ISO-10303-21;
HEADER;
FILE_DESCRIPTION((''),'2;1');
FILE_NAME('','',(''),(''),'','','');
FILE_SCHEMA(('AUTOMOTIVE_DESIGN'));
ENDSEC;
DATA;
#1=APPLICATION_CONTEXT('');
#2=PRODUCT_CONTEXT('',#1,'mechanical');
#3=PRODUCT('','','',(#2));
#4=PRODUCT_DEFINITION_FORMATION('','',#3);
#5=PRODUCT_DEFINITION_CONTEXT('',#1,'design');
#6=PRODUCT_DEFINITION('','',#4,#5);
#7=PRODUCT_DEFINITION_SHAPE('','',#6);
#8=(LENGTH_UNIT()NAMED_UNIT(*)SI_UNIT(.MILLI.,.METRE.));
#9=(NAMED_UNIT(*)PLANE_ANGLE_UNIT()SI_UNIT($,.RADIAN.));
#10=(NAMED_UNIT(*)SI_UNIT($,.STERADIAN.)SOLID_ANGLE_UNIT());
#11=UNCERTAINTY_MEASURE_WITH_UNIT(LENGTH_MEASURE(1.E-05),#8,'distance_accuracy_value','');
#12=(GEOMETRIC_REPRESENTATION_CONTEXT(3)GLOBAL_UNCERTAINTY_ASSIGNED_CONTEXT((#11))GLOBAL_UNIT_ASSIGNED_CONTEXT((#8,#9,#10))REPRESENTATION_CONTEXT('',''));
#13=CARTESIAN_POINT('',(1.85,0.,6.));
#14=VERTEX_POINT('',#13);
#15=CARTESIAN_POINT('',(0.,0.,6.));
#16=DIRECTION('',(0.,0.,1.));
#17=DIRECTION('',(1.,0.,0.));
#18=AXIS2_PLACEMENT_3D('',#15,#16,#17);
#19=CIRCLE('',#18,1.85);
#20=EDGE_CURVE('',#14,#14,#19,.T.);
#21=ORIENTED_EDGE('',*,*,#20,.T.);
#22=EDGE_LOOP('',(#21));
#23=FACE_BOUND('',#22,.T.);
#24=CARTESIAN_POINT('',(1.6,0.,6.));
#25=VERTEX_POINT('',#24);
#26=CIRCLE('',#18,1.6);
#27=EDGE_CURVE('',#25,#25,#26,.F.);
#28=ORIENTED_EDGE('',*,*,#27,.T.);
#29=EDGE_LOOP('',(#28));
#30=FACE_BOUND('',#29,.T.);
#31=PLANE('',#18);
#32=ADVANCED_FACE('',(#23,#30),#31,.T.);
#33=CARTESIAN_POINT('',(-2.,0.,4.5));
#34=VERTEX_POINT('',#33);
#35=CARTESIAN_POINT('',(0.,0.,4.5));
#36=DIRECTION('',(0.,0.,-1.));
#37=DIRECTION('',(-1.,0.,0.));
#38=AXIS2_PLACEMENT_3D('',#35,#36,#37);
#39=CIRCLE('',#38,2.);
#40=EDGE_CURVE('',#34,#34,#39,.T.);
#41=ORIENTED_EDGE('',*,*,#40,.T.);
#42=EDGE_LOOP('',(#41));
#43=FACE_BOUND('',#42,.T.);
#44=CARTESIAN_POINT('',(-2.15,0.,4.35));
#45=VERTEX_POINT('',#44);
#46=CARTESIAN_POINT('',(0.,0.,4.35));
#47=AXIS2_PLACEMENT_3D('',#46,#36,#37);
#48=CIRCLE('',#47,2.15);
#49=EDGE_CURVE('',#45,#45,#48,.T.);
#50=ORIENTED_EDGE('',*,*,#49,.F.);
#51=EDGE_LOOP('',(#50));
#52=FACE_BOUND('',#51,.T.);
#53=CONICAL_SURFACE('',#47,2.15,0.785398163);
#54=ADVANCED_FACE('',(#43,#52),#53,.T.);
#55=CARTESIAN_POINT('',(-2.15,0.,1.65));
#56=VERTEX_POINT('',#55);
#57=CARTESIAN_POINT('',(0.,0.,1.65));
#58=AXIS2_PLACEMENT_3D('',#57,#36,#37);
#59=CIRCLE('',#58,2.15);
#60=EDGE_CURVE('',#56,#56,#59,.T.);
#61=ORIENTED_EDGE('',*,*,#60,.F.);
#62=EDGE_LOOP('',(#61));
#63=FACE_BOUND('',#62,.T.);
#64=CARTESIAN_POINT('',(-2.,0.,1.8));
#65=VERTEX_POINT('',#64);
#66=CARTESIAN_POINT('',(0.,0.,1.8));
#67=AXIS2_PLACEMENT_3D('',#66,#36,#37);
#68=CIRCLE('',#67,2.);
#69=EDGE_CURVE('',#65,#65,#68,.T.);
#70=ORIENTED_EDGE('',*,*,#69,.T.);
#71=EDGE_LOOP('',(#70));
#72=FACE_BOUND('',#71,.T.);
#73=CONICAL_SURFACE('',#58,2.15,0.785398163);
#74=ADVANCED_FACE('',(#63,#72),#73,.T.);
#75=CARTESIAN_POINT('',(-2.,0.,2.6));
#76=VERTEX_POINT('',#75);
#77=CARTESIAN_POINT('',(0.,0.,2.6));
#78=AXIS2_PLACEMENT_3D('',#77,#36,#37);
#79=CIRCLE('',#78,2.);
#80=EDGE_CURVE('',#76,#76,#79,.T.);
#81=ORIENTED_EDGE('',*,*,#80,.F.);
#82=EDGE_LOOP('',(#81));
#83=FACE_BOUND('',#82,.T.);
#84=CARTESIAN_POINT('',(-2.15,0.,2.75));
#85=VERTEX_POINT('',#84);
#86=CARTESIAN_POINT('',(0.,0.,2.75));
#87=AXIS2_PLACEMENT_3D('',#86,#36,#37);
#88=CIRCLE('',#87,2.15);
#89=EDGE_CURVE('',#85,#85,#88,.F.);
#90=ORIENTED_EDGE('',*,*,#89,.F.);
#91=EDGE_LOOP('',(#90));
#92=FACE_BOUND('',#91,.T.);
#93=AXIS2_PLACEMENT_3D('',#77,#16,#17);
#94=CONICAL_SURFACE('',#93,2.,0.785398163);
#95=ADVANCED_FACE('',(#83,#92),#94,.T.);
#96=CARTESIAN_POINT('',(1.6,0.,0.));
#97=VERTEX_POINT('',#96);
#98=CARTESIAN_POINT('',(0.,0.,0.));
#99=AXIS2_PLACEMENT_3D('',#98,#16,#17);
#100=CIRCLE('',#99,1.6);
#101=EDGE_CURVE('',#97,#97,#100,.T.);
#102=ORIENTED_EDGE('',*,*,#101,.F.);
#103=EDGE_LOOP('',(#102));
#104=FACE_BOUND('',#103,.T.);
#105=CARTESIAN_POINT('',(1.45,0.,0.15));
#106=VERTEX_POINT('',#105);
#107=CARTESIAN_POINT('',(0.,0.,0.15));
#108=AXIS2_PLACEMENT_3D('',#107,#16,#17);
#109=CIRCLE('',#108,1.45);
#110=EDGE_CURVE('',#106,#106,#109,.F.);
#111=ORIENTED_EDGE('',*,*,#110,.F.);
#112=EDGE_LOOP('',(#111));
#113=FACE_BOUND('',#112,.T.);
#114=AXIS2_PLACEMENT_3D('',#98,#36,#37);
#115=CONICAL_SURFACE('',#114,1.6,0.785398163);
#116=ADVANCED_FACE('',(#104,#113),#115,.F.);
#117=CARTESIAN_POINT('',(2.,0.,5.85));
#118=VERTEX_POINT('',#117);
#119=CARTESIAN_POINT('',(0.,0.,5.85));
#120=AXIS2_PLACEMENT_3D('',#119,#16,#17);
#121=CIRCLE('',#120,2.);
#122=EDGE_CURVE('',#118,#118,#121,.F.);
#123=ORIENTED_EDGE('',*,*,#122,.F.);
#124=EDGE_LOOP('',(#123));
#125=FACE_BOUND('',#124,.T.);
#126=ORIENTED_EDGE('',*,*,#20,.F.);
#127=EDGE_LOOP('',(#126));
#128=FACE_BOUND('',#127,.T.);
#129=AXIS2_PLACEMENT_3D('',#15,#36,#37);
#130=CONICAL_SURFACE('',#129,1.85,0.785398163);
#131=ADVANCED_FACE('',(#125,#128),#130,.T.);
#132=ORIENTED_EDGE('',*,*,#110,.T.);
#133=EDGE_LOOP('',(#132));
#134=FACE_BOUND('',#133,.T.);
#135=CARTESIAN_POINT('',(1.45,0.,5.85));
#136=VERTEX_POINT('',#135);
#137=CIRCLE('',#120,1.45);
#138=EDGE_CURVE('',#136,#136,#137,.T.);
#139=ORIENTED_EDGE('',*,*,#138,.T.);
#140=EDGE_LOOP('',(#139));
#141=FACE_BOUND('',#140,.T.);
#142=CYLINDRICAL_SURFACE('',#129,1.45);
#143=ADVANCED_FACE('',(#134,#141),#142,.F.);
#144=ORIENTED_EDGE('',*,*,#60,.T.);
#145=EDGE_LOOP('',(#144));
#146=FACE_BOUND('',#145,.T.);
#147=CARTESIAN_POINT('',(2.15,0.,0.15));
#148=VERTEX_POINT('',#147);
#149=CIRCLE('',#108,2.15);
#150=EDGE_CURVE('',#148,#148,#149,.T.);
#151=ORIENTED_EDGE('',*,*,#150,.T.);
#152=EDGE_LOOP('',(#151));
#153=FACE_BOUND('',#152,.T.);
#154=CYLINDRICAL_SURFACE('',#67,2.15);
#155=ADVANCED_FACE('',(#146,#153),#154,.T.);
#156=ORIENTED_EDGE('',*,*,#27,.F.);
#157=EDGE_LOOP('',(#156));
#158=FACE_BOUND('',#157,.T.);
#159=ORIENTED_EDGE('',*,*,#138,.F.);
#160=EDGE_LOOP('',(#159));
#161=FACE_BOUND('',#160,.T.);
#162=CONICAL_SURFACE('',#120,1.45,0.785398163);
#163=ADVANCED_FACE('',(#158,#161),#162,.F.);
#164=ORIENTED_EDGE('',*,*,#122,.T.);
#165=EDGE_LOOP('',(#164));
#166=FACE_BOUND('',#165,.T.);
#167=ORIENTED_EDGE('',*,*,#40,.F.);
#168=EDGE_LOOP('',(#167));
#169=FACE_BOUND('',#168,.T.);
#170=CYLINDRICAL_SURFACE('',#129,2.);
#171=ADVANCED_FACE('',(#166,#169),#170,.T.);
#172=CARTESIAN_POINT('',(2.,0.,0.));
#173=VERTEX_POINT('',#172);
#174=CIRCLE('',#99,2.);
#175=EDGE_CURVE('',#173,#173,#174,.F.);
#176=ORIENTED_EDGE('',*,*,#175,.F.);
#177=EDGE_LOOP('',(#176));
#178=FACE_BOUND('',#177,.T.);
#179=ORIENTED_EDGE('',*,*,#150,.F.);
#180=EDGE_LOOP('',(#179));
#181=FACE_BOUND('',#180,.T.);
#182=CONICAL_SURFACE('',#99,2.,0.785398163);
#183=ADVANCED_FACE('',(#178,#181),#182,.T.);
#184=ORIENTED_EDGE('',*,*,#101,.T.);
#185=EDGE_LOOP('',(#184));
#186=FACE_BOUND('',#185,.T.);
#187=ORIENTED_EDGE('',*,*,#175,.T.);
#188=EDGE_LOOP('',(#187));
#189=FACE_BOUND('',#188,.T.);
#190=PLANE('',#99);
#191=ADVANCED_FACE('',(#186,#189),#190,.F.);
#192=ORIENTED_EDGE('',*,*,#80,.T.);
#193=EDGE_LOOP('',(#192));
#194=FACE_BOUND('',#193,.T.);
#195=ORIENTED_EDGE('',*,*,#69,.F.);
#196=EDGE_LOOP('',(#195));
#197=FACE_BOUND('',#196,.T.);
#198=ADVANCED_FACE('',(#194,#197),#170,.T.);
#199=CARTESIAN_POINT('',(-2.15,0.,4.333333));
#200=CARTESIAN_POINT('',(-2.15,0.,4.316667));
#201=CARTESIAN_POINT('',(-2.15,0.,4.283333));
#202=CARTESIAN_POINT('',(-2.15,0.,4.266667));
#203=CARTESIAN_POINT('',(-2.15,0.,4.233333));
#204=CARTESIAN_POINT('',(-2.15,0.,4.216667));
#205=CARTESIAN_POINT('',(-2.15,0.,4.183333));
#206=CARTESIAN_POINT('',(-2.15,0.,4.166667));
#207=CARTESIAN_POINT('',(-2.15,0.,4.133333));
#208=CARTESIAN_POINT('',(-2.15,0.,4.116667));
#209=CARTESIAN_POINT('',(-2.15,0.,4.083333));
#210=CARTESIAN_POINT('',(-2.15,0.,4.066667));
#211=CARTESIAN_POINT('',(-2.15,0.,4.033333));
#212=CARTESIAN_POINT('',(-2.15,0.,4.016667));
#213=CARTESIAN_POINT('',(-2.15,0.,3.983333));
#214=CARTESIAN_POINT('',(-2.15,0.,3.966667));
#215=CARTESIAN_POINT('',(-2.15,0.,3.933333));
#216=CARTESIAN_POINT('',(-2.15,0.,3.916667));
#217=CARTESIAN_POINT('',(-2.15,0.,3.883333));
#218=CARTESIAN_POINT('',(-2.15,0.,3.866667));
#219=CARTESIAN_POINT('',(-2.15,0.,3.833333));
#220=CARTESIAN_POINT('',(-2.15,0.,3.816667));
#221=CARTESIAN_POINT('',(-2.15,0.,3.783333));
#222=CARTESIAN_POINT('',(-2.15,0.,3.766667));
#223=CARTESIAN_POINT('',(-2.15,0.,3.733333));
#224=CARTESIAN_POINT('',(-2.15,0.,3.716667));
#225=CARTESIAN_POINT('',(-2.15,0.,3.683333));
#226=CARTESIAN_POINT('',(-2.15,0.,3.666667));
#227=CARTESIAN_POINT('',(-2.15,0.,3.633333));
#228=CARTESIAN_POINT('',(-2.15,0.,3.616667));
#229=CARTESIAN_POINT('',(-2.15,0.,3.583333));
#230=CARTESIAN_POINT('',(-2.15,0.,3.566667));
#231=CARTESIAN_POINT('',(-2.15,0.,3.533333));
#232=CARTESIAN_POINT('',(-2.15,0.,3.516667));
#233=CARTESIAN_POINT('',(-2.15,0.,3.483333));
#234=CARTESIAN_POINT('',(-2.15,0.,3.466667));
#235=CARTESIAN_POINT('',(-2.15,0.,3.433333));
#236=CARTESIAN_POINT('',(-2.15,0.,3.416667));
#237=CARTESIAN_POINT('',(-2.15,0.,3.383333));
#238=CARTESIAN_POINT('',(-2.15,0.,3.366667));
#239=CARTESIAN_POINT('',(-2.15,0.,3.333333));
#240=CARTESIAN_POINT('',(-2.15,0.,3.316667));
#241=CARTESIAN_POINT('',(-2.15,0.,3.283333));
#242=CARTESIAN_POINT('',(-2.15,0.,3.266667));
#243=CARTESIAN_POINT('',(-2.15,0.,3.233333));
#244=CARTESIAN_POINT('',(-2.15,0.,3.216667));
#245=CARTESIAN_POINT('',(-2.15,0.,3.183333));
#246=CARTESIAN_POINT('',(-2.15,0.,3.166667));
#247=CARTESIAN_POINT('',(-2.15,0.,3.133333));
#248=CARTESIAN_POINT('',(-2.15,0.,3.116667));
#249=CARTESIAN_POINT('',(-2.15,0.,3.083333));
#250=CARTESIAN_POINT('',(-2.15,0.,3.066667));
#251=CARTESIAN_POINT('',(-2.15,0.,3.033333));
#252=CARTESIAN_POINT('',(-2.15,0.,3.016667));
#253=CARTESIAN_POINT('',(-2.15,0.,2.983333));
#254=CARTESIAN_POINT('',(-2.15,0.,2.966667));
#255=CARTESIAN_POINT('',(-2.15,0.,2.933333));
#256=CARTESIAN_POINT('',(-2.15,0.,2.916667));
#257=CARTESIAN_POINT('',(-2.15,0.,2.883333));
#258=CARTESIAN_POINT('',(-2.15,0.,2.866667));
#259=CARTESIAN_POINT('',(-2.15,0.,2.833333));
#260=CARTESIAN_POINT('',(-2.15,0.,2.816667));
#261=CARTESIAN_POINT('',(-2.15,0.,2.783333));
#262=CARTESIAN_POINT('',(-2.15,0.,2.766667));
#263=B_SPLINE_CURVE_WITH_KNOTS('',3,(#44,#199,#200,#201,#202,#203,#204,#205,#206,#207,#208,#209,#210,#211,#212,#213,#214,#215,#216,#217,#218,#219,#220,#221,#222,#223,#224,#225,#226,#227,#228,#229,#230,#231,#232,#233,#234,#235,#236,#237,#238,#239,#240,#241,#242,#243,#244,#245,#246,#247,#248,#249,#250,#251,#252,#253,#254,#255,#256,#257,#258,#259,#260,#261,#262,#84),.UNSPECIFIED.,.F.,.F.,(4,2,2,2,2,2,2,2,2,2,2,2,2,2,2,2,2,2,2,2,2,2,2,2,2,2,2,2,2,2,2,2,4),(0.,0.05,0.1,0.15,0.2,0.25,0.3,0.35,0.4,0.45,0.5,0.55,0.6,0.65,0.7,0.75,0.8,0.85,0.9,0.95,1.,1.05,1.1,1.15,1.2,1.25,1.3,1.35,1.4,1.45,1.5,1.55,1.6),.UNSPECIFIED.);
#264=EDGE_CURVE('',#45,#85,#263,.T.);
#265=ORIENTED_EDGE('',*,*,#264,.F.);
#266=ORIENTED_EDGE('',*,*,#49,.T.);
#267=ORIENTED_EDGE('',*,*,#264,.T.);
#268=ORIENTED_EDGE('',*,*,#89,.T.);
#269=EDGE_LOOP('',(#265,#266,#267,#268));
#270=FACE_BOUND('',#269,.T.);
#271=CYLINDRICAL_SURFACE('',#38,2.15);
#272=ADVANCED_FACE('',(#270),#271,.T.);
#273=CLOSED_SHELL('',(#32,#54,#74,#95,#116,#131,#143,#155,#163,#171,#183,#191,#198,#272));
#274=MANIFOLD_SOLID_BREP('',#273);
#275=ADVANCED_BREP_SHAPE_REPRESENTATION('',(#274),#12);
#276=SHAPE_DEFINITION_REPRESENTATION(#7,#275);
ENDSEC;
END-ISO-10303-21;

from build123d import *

# Parameters (mm, degrees)
SKIZZE1_R                       = 2
SKIZZE1_R_2                     = 1.45
AUFSATZ_LINEAR_AUSTRAGEN1_DEPTH = 6
SKIZZE2_R                       = 2.15
SKIZZE2_R_2                     = 1.755690243
AUFSATZ_LINEAR_AUSTRAGEN2_DEPTH = 1.8
AUFSATZ_LINEAR_START            = -2.6
SKIZZE2_2_R                     = 2.15
SKIZZE2_2_R_2                   = 1.755690243
AUFSATZ_LINEAR_AUSTRAGEN3_DEPTH = 1.9
FASE1_SIZE                      = 0.15
FASE2_SIZE                      = 0.15


with BuildPart() as part:
    # Skizze1 → Aufsatz-Linear austragen1 (new body)
    with BuildSketch(Plane.XY):
        Circle(SKIZZE1_R)
        Circle(SKIZZE1_R_2, mode=Mode.SUBTRACT)
    extrude(amount=AUFSATZ_LINEAR_AUSTRAGEN1_DEPTH)

    # Skizze2 → Aufsatz-Linear austragen2 (add)
    with BuildSketch(Plane(origin=(0, 0, 0), x_dir=(-1, 0, 0), z_dir=(0, 0, -1))):
        Circle(SKIZZE2_R)
        Circle(SKIZZE2_R_2, mode=Mode.SUBTRACT)
    extrude(amount=-AUFSATZ_LINEAR_AUSTRAGEN2_DEPTH)

    # Skizze2<2> → Aufsatz-Linear austragen3 (add)
    with BuildSketch(Plane(origin=(0, 0, 0), x_dir=(-1, 0, 0), z_dir=(0, 0, -1)).offset(AUFSATZ_LINEAR_START)):
        Circle(SKIZZE2_2_R)
        Circle(SKIZZE2_2_R_2, mode=Mode.SUBTRACT)
    extrude(amount=-AUFSATZ_LINEAR_AUSTRAGEN3_DEPTH)

    # Fase1
    fase1_edges = [part.edges().sort_by_distance(p)[0] for p in [
        (2.15, 0, 0),
        (-2, 0, 6),
        (-1.45, 0, 0),
        (-1.45, 0, 6),
    ]]
    chamfer(fase1_edges, length=FASE1_SIZE)

    # Fase2
    fase2_edges = [part.edges().sort_by_distance(p)[0] for p in [
        (2.15, 0, 1.8),
        (2.15, 0, 4.5),
        (2.15, 0, 2.6),
    ]]
    chamfer(fase2_edges, length=FASE2_SIZE - 0.0001)  # a hair under: the kernel refuses the full size


solid = part.part
